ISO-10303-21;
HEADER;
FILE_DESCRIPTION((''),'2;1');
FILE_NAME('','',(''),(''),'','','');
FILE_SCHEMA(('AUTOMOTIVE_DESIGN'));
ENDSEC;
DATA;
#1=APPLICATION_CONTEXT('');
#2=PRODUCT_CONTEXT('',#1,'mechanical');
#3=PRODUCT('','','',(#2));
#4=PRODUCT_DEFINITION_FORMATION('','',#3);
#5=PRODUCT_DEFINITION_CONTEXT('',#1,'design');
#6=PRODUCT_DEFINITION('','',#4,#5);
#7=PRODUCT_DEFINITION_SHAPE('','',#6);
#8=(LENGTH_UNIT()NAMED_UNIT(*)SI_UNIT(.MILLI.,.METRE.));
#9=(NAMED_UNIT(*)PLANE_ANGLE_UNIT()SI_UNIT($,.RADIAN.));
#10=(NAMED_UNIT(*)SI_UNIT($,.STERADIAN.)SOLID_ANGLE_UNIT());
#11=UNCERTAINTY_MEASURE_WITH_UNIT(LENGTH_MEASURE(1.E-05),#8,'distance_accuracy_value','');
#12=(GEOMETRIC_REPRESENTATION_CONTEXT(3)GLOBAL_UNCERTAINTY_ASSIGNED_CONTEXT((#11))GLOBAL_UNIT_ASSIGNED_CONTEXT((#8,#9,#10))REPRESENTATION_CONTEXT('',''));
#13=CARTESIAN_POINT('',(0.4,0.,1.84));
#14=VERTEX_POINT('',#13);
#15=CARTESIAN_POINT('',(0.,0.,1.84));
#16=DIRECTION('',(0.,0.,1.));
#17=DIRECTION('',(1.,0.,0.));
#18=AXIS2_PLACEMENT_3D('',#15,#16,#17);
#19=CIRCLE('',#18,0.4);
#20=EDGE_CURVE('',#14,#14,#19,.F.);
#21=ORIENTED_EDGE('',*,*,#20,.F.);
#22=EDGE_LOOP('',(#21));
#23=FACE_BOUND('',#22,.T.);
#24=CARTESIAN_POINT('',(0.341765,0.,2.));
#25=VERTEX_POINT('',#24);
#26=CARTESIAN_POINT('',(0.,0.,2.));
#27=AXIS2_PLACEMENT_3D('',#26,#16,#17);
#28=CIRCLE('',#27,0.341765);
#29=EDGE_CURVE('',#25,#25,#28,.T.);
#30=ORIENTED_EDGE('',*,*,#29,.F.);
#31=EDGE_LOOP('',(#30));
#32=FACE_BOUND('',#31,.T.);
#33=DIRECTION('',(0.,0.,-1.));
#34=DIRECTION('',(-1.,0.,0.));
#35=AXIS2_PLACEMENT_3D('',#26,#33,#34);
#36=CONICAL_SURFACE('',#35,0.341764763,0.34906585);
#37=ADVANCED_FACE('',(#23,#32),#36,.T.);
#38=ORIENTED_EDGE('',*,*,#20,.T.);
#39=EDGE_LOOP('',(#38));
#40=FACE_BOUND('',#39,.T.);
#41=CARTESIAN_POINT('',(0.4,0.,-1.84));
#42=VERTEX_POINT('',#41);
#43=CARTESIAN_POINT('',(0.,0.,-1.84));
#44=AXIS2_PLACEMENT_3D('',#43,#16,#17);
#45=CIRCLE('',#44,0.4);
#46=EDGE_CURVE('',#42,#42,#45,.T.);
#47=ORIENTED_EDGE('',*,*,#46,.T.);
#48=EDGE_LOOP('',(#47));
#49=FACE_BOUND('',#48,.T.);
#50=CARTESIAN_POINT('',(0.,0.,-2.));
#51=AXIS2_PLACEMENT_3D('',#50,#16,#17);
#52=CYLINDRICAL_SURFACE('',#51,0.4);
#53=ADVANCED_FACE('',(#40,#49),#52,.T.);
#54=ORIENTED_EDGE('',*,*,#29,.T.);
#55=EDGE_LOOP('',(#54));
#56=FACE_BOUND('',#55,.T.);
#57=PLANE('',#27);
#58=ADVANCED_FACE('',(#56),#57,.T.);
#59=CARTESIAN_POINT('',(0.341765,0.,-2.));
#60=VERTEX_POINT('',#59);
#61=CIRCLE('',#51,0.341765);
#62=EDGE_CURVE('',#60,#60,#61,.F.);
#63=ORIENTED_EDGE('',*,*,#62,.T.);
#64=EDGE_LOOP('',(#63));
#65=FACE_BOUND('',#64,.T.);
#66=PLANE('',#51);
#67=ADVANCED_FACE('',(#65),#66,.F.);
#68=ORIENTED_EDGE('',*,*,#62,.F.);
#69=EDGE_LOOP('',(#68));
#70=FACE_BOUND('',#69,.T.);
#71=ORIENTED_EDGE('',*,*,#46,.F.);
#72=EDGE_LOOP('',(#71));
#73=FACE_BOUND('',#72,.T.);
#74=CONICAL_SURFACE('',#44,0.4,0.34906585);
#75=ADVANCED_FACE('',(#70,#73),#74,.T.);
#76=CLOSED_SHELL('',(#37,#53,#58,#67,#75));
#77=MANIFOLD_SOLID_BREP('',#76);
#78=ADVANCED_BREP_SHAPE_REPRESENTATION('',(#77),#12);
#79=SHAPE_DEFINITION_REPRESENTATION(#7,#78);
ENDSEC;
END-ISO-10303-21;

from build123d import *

# Parameters (mm, degrees)
E_CORPS_R   = 0.4
CORPS_DEPTH = 2
CHANF_SIZE  = 0.16
CHANF_SIZE2 = 0.058235237


with BuildPart() as part:
    # E_CORPS → CORPS (new, symmetric)
    with BuildSketch(Plane.XY):
        Circle(E_CORPS_R)
    extrude(amount=CORPS_DEPTH, both=True)

    # CHANF
    chanf_edges = [part.edges().sort_by_distance(p)[0] for p in [
        (-0.4, 0, 2),
        (-0.4, 0, -2),
    ]]
    chanf_side = [part.faces().sort_by_distance(p)[0] for p in [
        (-0.4, 0, 0),
    ]]
    chamfer(chanf_edges, length=CHANF_SIZE, length2=CHANF_SIZE2, reference=chanf_side[0])


solid = part.part
